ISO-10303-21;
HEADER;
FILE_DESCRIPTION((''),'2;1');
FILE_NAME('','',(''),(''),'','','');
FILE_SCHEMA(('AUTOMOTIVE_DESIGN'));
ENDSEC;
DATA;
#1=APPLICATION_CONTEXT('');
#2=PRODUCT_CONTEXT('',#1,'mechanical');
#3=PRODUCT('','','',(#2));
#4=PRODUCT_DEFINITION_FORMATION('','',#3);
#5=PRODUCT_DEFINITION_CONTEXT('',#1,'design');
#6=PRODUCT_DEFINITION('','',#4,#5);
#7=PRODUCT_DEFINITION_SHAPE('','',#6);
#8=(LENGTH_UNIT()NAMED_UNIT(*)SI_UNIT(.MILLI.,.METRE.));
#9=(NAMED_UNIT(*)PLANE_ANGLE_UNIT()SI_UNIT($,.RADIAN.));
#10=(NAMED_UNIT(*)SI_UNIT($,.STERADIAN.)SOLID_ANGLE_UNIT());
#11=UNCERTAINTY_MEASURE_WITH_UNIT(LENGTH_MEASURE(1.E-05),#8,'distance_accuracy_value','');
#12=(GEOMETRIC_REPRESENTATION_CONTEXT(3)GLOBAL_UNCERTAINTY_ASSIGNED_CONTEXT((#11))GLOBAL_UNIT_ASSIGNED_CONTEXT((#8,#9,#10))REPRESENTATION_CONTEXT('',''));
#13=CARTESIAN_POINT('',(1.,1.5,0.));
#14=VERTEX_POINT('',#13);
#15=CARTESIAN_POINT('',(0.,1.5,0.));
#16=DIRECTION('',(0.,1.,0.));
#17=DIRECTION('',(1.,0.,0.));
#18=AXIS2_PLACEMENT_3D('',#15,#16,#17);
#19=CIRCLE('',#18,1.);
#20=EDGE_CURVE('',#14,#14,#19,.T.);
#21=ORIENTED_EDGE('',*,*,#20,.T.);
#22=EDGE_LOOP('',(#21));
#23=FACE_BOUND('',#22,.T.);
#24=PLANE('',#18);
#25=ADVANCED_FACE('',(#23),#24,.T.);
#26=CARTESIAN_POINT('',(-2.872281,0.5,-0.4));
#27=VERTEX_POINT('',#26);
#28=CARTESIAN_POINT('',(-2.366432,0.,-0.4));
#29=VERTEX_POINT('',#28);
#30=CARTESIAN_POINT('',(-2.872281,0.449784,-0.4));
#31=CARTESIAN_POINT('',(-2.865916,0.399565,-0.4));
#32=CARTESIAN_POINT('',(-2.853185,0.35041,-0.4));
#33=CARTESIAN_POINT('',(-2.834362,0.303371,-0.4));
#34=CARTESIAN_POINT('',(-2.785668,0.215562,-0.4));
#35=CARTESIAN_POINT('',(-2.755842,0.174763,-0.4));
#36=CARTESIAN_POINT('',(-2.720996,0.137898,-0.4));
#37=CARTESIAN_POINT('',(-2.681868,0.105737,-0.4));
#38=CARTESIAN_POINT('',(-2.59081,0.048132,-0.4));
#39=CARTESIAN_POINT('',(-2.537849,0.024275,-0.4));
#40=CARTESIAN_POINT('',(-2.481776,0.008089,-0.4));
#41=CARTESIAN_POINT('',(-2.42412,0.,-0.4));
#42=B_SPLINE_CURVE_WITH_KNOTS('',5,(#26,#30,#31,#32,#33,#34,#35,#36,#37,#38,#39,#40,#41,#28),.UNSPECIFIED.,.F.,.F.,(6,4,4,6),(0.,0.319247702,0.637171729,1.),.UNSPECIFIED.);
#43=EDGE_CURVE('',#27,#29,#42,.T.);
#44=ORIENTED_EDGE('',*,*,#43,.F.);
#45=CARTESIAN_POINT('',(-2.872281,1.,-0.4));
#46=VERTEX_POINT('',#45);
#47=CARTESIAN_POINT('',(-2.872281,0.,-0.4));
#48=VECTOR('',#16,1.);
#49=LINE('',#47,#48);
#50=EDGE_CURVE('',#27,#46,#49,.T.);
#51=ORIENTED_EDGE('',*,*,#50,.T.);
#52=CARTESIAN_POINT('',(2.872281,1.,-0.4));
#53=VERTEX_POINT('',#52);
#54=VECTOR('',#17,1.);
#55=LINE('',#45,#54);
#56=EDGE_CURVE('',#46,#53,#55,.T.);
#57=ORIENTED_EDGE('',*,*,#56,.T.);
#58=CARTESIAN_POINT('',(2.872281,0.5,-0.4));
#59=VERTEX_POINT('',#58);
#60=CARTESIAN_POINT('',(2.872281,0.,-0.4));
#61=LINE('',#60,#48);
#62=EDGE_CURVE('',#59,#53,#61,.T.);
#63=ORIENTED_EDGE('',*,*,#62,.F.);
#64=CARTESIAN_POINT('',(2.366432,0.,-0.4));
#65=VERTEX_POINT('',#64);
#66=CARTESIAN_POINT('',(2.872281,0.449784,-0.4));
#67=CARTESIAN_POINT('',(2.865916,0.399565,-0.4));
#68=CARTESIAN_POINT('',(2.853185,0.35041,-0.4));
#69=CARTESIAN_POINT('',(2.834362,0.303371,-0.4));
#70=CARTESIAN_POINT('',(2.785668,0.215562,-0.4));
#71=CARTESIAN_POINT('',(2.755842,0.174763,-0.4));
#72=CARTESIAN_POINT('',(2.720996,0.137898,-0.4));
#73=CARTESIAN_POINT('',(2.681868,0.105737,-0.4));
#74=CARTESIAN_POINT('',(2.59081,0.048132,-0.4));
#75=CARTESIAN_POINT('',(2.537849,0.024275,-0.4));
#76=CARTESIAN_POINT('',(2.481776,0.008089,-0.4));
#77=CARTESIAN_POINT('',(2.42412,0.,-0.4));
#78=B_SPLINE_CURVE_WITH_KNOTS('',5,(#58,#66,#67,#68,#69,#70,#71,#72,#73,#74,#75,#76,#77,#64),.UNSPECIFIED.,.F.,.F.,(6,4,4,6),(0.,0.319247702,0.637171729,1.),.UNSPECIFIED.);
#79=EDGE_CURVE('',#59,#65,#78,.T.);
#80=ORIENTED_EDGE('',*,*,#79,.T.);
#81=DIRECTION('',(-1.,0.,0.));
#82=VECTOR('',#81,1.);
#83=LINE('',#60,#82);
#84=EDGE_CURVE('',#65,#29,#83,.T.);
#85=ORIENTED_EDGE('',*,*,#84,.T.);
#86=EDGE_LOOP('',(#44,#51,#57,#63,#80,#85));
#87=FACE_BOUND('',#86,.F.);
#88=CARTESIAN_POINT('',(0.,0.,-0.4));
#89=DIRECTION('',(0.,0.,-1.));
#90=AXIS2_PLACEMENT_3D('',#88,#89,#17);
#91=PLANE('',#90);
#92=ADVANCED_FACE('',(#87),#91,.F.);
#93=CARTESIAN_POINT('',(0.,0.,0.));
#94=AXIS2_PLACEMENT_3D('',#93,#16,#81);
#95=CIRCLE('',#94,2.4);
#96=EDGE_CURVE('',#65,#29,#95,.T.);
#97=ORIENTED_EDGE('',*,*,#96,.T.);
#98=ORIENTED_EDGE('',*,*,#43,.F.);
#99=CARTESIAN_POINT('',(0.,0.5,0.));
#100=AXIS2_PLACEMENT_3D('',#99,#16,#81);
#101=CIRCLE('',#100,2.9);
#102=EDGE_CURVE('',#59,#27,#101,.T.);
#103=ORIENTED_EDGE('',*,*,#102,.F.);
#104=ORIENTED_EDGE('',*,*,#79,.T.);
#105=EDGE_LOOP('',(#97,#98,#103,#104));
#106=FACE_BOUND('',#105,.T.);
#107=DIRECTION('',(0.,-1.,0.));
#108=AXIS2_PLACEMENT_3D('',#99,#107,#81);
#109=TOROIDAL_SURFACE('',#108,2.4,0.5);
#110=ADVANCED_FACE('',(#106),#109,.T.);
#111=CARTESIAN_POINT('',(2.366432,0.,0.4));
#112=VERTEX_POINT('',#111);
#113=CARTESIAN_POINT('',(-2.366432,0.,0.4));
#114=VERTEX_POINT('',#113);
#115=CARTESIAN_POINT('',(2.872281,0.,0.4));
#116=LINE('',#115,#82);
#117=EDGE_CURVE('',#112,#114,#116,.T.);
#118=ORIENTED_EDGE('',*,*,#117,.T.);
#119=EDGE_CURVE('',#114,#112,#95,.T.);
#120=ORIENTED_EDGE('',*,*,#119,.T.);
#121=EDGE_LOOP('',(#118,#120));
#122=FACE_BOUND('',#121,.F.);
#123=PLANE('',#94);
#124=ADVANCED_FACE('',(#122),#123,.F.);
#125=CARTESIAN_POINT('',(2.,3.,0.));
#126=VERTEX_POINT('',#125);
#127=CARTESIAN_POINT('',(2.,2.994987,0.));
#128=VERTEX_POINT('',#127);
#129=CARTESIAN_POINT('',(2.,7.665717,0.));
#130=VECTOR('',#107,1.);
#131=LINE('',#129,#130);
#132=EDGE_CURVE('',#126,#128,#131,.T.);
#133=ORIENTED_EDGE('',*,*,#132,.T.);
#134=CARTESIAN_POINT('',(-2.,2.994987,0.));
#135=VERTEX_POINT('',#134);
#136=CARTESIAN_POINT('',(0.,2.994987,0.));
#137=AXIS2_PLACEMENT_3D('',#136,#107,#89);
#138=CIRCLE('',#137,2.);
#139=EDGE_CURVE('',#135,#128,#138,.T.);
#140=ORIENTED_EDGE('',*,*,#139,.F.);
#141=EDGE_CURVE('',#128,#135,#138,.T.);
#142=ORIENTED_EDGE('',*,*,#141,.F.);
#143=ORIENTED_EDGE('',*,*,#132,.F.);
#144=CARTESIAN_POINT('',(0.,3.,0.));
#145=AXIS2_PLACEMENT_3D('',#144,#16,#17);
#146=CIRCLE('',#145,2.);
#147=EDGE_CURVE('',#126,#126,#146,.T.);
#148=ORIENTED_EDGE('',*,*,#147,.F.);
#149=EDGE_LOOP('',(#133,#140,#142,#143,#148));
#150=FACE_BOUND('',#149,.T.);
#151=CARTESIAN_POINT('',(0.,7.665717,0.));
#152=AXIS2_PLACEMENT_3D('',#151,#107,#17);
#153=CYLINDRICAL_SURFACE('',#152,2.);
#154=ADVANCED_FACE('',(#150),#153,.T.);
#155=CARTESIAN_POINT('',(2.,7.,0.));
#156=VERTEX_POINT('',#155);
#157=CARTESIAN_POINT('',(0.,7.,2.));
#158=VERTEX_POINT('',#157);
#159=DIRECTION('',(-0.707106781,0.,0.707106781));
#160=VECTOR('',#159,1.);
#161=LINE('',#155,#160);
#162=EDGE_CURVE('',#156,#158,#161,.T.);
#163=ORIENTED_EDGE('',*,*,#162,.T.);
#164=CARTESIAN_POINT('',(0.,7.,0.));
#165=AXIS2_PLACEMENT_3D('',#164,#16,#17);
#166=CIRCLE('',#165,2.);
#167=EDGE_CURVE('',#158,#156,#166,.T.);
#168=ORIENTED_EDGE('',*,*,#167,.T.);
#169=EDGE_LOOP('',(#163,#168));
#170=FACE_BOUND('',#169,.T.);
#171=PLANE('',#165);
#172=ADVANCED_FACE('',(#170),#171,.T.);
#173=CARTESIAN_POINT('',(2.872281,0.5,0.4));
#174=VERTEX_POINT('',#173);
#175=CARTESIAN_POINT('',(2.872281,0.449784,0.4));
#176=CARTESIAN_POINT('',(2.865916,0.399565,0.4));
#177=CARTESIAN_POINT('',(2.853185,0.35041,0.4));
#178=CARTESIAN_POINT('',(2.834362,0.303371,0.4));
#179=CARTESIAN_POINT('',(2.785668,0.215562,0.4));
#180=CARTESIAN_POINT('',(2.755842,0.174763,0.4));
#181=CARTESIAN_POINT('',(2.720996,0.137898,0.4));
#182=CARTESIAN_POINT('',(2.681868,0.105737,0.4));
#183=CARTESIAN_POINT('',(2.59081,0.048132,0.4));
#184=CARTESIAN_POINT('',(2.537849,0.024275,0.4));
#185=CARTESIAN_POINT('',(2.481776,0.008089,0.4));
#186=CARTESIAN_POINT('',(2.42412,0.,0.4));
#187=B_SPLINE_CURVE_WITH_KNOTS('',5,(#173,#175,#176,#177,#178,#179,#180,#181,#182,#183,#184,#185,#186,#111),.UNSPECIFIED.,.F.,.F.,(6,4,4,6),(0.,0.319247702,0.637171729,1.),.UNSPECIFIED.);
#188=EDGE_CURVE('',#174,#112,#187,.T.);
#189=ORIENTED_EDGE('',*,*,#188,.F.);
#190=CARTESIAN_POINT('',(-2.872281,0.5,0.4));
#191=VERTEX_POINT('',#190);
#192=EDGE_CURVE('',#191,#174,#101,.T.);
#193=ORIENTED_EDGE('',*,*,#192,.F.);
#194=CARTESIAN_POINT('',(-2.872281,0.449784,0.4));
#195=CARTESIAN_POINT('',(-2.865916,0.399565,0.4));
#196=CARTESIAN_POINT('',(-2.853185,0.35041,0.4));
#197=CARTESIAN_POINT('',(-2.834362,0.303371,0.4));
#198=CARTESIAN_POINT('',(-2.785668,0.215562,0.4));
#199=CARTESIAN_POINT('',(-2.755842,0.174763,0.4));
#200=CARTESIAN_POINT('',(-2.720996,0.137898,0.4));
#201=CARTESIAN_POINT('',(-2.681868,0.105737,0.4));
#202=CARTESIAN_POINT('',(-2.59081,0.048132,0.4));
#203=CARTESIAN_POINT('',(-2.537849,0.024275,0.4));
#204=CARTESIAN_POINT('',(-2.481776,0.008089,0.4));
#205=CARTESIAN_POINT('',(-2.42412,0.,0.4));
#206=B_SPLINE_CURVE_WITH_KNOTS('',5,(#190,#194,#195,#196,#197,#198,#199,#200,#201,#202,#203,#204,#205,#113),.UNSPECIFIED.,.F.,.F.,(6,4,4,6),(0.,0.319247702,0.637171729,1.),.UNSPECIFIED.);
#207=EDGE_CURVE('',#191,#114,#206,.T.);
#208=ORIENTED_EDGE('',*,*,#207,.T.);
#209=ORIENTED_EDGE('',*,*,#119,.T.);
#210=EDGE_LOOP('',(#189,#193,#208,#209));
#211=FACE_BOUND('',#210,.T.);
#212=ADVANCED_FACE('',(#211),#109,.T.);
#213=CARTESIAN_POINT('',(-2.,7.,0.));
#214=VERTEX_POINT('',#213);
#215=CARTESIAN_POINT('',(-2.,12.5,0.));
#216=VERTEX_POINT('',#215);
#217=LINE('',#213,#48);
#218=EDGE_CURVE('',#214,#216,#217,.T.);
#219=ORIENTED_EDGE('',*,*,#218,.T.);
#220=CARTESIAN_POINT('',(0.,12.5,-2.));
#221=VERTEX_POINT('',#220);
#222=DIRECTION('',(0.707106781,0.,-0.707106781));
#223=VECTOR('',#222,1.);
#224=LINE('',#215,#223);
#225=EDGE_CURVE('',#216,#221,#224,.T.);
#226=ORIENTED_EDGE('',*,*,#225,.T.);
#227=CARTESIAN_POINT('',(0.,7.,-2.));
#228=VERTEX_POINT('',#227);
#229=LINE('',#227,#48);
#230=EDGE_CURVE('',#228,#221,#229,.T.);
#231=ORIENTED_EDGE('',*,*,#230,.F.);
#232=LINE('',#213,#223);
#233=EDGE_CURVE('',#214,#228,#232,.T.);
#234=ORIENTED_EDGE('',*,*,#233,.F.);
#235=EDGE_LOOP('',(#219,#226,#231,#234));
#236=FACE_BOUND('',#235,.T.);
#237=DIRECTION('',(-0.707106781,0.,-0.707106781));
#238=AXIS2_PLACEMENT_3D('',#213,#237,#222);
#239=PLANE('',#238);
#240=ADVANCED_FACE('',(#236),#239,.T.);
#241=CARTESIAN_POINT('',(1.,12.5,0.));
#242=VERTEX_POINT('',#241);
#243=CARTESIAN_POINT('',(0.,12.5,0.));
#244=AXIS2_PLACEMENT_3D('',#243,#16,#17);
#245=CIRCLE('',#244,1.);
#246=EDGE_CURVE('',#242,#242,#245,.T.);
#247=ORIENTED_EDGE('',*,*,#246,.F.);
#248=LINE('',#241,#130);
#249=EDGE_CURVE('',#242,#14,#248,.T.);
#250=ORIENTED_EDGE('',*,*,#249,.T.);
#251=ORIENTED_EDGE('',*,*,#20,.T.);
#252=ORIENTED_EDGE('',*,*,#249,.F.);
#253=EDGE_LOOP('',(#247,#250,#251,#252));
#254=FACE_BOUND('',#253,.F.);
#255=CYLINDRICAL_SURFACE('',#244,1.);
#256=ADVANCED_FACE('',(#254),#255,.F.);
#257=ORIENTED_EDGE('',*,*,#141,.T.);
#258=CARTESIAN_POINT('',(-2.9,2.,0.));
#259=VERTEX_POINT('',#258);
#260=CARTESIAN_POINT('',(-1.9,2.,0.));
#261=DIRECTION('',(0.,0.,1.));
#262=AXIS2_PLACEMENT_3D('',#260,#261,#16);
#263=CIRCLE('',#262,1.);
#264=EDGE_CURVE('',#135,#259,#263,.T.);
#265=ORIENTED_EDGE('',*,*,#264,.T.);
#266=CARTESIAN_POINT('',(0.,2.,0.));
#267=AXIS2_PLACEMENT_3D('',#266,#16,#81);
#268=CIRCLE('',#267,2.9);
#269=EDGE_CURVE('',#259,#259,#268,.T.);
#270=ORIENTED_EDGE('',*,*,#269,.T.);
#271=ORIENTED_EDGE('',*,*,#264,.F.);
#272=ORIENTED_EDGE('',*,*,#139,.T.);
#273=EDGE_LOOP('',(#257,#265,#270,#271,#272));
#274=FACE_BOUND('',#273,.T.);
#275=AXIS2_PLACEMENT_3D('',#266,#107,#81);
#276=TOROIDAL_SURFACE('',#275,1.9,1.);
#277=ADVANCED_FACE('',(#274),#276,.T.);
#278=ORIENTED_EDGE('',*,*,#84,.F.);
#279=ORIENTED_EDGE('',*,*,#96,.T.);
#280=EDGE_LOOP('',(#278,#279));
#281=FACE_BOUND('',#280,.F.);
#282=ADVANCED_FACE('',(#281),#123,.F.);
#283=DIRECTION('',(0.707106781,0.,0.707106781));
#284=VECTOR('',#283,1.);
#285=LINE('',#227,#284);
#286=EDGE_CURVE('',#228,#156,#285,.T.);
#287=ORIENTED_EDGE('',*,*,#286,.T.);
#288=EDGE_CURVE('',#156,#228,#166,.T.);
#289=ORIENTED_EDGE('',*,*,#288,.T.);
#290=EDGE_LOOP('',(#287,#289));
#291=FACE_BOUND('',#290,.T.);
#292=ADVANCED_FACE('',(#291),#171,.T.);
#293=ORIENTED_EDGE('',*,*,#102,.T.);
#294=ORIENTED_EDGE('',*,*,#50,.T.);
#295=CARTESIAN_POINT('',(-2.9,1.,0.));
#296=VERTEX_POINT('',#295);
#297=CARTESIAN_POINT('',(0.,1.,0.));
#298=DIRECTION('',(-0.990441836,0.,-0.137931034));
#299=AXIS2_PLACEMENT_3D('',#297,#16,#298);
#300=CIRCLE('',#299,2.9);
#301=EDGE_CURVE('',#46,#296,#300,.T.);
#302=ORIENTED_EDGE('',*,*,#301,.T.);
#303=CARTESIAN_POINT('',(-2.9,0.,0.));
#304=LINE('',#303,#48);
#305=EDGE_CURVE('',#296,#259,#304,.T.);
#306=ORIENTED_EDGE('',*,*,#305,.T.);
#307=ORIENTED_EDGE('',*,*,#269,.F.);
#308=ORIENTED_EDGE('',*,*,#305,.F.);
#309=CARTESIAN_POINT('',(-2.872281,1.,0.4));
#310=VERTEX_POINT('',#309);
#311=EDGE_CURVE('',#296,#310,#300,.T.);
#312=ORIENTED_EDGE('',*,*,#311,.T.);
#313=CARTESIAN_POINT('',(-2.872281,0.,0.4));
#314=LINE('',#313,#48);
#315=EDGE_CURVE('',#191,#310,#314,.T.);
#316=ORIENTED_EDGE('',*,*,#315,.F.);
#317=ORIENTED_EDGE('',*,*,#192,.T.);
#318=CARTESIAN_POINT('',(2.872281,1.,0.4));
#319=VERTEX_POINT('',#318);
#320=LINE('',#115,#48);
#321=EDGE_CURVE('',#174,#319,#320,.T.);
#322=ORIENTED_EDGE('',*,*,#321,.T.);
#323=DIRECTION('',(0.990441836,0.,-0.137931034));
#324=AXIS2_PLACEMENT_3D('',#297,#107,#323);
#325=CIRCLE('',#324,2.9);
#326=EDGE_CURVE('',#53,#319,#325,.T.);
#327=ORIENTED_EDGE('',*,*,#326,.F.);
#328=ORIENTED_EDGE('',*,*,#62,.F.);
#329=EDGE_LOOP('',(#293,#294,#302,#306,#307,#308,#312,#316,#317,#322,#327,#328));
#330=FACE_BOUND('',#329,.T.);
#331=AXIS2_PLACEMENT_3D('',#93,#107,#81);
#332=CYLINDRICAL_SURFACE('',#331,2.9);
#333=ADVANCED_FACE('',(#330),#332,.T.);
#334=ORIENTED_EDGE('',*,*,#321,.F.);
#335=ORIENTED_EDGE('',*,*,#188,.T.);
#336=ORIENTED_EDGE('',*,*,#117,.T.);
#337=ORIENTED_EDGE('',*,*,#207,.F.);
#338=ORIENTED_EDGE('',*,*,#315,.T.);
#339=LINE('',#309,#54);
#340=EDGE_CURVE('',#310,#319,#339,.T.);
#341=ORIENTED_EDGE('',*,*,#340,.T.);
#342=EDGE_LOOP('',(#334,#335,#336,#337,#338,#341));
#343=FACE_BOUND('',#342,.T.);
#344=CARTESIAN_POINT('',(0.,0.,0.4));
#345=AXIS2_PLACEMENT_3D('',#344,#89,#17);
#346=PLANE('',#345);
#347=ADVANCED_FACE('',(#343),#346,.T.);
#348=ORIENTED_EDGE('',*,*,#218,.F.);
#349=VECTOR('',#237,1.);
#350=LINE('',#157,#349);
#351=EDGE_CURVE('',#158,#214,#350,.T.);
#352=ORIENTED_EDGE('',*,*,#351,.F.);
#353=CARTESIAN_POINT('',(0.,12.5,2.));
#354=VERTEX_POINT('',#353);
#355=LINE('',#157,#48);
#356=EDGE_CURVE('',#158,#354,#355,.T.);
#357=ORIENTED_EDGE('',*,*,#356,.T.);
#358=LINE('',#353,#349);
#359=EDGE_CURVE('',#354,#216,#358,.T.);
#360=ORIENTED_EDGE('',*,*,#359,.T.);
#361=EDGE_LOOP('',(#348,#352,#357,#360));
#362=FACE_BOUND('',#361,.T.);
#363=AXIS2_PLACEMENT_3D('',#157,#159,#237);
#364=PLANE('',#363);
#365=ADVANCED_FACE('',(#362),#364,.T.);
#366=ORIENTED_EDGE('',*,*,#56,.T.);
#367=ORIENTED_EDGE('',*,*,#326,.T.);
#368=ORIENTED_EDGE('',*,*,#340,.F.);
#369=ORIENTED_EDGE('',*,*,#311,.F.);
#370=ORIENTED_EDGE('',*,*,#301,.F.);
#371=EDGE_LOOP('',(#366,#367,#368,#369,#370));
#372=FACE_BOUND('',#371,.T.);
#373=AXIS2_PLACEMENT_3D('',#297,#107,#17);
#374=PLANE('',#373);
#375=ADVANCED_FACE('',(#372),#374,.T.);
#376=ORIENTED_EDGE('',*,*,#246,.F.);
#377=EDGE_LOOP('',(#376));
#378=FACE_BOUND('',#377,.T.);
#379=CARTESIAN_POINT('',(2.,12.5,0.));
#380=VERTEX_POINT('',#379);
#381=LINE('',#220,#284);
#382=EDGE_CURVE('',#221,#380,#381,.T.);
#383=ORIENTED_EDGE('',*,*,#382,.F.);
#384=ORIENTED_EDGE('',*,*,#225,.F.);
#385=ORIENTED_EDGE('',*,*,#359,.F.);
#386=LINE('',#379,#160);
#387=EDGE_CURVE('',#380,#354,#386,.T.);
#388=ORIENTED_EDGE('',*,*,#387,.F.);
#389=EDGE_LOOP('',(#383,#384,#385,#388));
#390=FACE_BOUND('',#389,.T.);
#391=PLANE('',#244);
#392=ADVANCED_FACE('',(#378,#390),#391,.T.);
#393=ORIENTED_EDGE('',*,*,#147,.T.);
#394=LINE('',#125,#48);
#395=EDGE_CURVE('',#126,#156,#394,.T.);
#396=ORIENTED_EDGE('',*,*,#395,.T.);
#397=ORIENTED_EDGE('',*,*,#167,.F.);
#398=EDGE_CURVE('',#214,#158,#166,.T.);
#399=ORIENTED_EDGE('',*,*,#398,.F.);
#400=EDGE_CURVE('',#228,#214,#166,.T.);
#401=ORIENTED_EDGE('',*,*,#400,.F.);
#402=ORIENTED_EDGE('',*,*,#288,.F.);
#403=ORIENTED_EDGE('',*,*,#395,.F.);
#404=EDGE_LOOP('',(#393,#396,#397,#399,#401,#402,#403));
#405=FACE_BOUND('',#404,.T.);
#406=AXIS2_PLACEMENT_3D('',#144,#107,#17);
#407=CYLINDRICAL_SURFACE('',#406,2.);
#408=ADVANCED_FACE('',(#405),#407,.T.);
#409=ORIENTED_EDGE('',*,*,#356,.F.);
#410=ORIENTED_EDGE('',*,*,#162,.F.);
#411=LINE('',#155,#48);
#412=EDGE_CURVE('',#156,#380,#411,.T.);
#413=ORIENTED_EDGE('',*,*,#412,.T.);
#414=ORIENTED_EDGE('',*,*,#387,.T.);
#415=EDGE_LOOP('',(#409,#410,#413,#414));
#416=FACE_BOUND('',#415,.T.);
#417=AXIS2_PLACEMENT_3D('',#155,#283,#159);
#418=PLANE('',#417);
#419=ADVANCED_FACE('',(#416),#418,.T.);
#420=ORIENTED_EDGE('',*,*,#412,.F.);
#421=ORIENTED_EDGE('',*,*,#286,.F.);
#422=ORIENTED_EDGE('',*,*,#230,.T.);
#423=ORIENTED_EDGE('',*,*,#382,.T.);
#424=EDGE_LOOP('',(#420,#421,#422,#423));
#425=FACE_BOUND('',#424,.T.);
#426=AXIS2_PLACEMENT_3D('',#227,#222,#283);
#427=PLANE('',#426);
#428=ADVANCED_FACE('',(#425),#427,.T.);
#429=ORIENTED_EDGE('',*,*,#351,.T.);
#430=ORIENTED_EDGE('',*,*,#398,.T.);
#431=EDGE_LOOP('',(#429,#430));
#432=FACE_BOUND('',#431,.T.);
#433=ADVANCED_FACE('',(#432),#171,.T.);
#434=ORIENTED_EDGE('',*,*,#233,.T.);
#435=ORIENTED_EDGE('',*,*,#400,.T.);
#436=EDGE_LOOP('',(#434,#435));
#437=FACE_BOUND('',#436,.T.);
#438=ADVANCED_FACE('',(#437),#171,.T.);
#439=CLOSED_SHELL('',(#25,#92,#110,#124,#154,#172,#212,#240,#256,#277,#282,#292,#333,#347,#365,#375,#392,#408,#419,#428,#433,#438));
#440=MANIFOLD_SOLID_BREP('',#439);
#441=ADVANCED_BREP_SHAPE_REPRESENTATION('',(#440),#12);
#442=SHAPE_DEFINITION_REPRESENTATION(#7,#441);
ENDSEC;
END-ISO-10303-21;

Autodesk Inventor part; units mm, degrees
ref_plane "YZ Plane" through (0, 0, 0) normal (1, 0, 0) x (0, 1, 0)
ref_plane "XZ Plane" through (0, 0, 0) normal (0, 1, 0) x (-1, 0, 0)
ref_plane "XY Plane" through (0, 0, 0) normal (0, 0, 1) x (1, 0, 0)
sketch "Sketch1" plane through (0, 0, 0) normal (0, 1, 0) x (-1, 0, 0)
  circle A0 centre (0, 0) radius 2.9
  dimension "d0" = 5.8
extrude "Extrusion1" add sketch "Sketch1" along normal blind 3
sketch "Sketch2" plane through (0, 3, 0) normal (0, 1, 0) x (1, 0, 0)
  circle A0 centre (0, 0) radius 2
  dimension "d3" = 4
extrude "Extrusion2" add sketch "Sketch2" along normal blind 4
sketch "Sketch3" plane through (0, 7, 0) normal (0, 1, 0) x (1, 0, 0)
  circle A0 centre (0, 0) radius 2 projected
  line L0 (0, -2) -> (-2, 0)
  line L1 (-2, 0) -> (0, 2)
  line L2 (0, 2) -> (2, 0)
  line L3 (2, 0) -> (0, -2)
extrude "Extrusion3" add sketch "Sketch3" along normal blind 5.5 contours L3 L0 L1 L2
fillet "Fillet1" radius 1 1 edges at (2.9, 3, 0)
fillet "Fillet2" radius 0.5 1 edges at (2.9, 0, 0)
sketch "Sketch4" plane through (0, 0, 0) normal (0, -1, 0) x (1, 0, 0)
  line L0 (0, 0) -> (-2.9, 0)
  circle A0 centre (0, 0) radius 2.9 projected
  line L1 (0, 0) -> (2.973, 0)
  line L2 (-2.9, 0.4) -> (0, 0.4)
  line L3 (0, 0.4) -> (2.973, 0.4)
  line L4 (-2.9, -0.4) -> (0, -0.4)
  line L5 (0, -0.4) -> (2.973, -0.4)
  circle A1 centre (0, 0) radius 2.9275
  point P0 (2.8723, -0.4)
  point P1 (2.8723, 0.4)
  point P2 (-2.8723, 0.4)
  point P3 (-2.8723, -0.4)
  dimension "d10" = 0.4
  dimension "d11" = 0.4
extrude "Extrusion4" cut sketch "Sketch4" against normal blind 1 contours L1 A0 L5 L4 L0 | L0 A0 L2 L3 L1
sketch "Sketch5" plane through (0, 12.5, 0) normal (0, 1, 0) x (1, 0, 0)
  circle A0 centre (0, 0) radius 1
  dimension "d14" = 2
extrude "Extrusion5" cut sketch "Sketch5" against normal blind 11
properties part number "sroub"
